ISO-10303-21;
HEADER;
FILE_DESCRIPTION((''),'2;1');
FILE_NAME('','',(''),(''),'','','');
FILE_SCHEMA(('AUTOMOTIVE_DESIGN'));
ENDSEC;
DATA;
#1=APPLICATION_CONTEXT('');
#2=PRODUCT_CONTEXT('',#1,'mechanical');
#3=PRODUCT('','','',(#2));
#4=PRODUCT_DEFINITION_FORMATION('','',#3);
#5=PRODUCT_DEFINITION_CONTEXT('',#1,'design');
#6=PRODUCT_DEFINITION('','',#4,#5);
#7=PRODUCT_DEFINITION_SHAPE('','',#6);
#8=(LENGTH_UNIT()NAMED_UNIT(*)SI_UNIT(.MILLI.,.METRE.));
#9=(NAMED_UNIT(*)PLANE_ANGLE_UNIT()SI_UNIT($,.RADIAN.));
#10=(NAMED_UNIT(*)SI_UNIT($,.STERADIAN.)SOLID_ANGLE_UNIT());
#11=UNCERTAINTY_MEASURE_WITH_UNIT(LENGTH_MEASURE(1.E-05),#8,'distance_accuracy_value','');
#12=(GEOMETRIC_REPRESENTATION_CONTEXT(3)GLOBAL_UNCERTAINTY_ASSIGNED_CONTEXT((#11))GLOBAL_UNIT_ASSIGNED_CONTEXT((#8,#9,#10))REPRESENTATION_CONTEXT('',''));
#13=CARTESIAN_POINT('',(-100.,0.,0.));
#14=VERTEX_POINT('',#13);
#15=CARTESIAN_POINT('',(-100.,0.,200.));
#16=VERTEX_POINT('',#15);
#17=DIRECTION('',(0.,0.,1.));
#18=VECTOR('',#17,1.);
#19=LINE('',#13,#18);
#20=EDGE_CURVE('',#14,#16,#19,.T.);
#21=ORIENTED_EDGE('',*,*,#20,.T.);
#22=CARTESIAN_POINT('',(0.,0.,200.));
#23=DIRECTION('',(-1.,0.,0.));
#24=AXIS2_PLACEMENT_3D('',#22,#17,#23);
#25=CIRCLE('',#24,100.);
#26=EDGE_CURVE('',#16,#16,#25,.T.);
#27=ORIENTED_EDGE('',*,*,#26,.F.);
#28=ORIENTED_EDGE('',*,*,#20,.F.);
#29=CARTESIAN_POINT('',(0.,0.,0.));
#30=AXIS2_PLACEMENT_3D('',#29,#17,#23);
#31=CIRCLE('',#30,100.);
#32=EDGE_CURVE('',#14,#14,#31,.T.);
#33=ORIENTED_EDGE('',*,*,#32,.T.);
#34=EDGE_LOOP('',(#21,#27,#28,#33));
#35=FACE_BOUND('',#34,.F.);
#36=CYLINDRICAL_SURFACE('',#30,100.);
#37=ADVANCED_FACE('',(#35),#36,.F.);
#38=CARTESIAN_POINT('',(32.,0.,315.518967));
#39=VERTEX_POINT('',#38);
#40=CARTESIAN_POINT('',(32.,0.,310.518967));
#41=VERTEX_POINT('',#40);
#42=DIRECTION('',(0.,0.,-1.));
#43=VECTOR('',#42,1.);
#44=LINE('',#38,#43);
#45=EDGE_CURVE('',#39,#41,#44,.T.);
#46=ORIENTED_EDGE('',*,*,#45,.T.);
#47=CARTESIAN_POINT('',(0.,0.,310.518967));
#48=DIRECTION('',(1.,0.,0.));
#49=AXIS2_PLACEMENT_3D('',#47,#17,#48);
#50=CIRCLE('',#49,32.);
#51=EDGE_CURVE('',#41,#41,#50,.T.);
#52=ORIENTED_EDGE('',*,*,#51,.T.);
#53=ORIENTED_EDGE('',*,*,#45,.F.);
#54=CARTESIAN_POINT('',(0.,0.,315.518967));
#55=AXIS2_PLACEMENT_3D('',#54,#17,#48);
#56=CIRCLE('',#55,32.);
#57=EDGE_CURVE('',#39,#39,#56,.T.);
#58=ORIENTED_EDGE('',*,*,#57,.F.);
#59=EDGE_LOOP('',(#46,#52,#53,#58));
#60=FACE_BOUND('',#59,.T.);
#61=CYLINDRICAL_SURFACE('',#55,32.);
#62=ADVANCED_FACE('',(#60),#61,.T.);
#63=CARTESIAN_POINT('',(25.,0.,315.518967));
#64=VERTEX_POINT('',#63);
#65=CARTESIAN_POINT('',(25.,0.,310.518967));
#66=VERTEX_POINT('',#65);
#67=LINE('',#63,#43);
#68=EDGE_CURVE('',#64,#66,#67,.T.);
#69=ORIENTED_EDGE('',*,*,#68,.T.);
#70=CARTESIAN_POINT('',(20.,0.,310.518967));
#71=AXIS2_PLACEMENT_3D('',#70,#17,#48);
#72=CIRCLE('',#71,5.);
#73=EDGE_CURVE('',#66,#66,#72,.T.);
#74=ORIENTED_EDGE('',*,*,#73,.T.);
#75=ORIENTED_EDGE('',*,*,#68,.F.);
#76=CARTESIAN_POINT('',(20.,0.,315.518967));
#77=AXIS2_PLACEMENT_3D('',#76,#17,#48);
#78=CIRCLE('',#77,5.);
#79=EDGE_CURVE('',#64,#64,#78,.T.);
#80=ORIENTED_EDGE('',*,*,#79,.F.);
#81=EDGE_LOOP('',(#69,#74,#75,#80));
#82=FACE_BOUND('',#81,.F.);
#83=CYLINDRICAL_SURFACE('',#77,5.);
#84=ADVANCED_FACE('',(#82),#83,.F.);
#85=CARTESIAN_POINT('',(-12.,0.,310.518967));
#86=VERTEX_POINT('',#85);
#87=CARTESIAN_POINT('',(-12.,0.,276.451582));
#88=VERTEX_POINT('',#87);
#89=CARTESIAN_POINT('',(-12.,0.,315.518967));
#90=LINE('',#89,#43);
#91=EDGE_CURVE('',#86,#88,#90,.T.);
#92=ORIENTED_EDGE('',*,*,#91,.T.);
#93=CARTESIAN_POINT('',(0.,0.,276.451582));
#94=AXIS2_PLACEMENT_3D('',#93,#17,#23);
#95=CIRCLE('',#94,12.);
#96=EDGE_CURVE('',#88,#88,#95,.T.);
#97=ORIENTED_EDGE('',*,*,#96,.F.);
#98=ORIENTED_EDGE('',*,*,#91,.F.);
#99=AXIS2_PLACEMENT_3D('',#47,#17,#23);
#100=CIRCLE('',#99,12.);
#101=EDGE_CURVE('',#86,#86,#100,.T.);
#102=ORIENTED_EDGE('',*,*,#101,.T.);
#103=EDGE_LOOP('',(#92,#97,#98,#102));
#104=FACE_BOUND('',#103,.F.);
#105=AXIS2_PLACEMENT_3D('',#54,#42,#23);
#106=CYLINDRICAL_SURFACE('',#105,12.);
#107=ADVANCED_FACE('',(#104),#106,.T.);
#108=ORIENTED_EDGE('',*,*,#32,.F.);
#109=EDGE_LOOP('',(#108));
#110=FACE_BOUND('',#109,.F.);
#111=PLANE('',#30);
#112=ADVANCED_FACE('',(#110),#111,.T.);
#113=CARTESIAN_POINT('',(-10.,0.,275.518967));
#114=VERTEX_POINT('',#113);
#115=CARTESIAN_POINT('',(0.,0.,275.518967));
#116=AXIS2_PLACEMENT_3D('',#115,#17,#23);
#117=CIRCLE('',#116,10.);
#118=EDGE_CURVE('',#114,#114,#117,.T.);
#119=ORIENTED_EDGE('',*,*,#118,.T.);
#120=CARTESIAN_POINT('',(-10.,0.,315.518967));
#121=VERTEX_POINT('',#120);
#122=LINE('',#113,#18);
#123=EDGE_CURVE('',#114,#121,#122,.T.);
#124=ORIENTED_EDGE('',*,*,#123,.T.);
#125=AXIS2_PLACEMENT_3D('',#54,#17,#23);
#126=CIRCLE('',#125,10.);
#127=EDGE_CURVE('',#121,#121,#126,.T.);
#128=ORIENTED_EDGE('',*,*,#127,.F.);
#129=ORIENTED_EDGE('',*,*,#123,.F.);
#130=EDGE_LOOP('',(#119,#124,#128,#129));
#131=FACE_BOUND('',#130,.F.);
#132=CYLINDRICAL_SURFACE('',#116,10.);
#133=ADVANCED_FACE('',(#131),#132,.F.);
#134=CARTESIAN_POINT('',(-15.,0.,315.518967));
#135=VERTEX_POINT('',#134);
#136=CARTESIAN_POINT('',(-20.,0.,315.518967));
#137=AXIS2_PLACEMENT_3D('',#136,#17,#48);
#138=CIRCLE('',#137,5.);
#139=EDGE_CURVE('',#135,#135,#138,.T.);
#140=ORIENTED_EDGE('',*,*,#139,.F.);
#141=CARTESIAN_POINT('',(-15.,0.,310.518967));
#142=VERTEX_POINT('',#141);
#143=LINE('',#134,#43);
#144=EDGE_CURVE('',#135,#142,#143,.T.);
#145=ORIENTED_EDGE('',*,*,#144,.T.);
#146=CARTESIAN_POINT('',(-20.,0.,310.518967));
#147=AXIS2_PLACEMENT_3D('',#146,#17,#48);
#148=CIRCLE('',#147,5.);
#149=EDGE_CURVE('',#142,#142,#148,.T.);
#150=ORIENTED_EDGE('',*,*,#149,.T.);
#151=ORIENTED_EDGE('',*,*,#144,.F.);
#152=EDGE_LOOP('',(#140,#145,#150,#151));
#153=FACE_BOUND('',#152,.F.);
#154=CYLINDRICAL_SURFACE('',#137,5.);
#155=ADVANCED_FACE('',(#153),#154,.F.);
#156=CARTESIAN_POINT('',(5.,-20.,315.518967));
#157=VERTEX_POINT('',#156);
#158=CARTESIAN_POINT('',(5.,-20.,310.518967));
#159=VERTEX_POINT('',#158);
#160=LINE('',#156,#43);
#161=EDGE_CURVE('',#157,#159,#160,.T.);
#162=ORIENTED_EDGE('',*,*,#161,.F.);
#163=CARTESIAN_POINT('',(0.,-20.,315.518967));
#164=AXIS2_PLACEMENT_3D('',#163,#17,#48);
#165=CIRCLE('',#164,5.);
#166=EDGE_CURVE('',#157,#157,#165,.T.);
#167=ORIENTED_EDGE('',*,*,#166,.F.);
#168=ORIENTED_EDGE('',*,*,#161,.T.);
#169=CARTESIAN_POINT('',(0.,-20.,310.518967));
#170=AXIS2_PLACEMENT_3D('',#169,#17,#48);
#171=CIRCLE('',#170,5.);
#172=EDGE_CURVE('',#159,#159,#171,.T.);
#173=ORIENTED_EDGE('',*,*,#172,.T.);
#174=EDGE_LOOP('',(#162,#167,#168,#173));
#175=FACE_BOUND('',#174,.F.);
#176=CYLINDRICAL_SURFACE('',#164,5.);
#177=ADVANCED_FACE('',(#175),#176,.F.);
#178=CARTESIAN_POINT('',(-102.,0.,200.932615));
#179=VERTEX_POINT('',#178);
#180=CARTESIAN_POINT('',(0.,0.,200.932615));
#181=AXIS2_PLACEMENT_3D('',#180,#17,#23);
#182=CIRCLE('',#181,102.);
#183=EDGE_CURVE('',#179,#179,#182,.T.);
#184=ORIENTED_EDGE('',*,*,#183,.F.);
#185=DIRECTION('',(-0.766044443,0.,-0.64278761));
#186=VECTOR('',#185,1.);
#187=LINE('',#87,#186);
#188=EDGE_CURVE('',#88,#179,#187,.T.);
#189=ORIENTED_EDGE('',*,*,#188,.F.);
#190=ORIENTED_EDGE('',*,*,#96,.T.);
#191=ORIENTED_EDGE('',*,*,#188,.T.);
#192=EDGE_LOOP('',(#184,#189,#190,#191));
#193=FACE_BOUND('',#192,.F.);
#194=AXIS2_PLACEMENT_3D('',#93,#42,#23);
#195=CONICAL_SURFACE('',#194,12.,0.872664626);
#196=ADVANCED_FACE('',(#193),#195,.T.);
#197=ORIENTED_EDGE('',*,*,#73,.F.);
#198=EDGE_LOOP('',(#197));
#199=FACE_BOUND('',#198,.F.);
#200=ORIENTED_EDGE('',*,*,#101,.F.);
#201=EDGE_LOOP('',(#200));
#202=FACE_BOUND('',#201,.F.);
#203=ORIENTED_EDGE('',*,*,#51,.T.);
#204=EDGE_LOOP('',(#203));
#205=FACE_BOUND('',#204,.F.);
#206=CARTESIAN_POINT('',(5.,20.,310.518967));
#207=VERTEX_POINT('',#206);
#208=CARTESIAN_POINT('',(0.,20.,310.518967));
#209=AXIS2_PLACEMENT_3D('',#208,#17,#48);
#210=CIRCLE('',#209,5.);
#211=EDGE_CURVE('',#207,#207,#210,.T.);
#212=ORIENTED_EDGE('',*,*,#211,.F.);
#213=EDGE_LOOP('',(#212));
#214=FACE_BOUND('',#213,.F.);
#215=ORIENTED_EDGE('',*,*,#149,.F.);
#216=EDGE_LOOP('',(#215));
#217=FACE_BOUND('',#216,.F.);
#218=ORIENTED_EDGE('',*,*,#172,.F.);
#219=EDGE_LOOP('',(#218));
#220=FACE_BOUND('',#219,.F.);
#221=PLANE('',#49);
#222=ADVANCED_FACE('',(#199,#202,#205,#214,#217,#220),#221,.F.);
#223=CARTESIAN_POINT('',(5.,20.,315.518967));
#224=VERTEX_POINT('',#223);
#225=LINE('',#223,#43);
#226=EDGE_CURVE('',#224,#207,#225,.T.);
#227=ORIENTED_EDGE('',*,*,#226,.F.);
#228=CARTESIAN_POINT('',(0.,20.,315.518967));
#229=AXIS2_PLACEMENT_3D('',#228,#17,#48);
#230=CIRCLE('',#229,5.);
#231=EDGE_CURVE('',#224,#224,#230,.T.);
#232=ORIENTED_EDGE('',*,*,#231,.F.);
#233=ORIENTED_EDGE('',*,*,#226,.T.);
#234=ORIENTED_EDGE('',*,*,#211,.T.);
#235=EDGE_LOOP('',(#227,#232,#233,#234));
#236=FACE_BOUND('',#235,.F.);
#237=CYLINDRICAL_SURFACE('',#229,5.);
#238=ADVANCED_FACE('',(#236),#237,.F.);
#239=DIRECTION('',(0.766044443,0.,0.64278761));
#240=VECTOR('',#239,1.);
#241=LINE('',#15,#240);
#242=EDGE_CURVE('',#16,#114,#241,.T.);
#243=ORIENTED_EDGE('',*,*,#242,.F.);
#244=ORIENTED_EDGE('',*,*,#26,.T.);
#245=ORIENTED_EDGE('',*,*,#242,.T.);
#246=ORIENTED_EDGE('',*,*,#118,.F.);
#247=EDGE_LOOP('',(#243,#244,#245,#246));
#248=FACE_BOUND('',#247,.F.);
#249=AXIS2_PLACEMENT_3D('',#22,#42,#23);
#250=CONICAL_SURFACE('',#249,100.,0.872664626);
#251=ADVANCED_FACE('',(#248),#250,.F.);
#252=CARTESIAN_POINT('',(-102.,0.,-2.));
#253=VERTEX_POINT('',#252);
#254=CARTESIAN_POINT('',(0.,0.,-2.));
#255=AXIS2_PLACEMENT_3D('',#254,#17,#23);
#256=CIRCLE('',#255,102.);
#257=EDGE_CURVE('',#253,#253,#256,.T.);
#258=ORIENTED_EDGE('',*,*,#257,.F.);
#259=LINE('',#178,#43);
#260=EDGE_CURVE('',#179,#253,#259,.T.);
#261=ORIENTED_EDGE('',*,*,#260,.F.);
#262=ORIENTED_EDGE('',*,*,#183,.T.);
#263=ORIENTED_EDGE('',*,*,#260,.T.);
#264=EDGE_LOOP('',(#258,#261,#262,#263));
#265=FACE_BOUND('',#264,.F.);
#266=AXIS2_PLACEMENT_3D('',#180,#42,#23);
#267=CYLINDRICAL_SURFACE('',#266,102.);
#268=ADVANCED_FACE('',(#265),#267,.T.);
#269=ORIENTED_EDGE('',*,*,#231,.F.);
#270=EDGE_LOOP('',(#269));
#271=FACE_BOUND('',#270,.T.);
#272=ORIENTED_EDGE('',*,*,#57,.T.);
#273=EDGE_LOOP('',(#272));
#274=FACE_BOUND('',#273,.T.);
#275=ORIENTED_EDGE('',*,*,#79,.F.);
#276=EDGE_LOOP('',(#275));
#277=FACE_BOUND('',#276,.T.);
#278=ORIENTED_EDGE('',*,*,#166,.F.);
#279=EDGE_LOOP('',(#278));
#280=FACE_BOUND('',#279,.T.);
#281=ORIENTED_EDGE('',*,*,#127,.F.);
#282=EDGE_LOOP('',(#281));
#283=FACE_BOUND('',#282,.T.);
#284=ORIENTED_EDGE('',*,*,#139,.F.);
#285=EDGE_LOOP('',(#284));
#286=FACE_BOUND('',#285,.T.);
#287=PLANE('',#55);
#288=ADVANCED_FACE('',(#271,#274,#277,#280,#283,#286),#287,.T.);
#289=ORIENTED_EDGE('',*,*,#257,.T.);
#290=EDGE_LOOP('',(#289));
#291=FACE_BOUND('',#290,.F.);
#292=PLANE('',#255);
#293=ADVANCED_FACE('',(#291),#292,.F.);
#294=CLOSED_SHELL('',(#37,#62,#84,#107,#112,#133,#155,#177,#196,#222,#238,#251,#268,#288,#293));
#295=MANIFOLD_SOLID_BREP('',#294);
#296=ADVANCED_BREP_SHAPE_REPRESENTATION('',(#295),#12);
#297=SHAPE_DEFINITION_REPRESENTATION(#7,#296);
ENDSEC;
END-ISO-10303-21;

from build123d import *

# Parameters (mm, degrees)
F2_R     = 32
F2_R_2   = 12
F3_DEPTH = 5
F4_R     = 5
F5_DEPTH = 5


with BuildPart() as f1:
    # F0 (on Front) → F1 (revolve)
    with BuildSketch(Plane.XZ):
        Polygon((-100, 0), (-100, 200), (-10, 275.518966806), (-10, 315.518966806), (-12, 315.518966806), (-12, 276.4515821223), (-102, 200.9326153163), (-102, -2), (0, -2), (0, 0), align=None)
    revolve(axis=Axis((0, 0, 120), (0, 0, 1)))

    # F2 (on face) → F3 (join)
    with BuildSketch(Plane.XY.offset(315.518966806)):
        Circle(F2_R)
        Circle(F2_R_2, mode=Mode.SUBTRACT)
    extrude(amount=-F3_DEPTH)

    # F4 (on face) → F5 (cut, through all)
    with BuildSketch(Plane.XY.offset(315.518966806)):
        with Locations((0, 20)):
            Circle(F4_R)
        with Locations((-20, 0)):
            Circle(F4_R)
        with Locations((0, -20)):
            Circle(F4_R)
        with Locations((20, 0)):
            Circle(F4_R)
    extrude(amount=-F5_DEPTH, mode=Mode.SUBTRACT)


solid = f1.part
